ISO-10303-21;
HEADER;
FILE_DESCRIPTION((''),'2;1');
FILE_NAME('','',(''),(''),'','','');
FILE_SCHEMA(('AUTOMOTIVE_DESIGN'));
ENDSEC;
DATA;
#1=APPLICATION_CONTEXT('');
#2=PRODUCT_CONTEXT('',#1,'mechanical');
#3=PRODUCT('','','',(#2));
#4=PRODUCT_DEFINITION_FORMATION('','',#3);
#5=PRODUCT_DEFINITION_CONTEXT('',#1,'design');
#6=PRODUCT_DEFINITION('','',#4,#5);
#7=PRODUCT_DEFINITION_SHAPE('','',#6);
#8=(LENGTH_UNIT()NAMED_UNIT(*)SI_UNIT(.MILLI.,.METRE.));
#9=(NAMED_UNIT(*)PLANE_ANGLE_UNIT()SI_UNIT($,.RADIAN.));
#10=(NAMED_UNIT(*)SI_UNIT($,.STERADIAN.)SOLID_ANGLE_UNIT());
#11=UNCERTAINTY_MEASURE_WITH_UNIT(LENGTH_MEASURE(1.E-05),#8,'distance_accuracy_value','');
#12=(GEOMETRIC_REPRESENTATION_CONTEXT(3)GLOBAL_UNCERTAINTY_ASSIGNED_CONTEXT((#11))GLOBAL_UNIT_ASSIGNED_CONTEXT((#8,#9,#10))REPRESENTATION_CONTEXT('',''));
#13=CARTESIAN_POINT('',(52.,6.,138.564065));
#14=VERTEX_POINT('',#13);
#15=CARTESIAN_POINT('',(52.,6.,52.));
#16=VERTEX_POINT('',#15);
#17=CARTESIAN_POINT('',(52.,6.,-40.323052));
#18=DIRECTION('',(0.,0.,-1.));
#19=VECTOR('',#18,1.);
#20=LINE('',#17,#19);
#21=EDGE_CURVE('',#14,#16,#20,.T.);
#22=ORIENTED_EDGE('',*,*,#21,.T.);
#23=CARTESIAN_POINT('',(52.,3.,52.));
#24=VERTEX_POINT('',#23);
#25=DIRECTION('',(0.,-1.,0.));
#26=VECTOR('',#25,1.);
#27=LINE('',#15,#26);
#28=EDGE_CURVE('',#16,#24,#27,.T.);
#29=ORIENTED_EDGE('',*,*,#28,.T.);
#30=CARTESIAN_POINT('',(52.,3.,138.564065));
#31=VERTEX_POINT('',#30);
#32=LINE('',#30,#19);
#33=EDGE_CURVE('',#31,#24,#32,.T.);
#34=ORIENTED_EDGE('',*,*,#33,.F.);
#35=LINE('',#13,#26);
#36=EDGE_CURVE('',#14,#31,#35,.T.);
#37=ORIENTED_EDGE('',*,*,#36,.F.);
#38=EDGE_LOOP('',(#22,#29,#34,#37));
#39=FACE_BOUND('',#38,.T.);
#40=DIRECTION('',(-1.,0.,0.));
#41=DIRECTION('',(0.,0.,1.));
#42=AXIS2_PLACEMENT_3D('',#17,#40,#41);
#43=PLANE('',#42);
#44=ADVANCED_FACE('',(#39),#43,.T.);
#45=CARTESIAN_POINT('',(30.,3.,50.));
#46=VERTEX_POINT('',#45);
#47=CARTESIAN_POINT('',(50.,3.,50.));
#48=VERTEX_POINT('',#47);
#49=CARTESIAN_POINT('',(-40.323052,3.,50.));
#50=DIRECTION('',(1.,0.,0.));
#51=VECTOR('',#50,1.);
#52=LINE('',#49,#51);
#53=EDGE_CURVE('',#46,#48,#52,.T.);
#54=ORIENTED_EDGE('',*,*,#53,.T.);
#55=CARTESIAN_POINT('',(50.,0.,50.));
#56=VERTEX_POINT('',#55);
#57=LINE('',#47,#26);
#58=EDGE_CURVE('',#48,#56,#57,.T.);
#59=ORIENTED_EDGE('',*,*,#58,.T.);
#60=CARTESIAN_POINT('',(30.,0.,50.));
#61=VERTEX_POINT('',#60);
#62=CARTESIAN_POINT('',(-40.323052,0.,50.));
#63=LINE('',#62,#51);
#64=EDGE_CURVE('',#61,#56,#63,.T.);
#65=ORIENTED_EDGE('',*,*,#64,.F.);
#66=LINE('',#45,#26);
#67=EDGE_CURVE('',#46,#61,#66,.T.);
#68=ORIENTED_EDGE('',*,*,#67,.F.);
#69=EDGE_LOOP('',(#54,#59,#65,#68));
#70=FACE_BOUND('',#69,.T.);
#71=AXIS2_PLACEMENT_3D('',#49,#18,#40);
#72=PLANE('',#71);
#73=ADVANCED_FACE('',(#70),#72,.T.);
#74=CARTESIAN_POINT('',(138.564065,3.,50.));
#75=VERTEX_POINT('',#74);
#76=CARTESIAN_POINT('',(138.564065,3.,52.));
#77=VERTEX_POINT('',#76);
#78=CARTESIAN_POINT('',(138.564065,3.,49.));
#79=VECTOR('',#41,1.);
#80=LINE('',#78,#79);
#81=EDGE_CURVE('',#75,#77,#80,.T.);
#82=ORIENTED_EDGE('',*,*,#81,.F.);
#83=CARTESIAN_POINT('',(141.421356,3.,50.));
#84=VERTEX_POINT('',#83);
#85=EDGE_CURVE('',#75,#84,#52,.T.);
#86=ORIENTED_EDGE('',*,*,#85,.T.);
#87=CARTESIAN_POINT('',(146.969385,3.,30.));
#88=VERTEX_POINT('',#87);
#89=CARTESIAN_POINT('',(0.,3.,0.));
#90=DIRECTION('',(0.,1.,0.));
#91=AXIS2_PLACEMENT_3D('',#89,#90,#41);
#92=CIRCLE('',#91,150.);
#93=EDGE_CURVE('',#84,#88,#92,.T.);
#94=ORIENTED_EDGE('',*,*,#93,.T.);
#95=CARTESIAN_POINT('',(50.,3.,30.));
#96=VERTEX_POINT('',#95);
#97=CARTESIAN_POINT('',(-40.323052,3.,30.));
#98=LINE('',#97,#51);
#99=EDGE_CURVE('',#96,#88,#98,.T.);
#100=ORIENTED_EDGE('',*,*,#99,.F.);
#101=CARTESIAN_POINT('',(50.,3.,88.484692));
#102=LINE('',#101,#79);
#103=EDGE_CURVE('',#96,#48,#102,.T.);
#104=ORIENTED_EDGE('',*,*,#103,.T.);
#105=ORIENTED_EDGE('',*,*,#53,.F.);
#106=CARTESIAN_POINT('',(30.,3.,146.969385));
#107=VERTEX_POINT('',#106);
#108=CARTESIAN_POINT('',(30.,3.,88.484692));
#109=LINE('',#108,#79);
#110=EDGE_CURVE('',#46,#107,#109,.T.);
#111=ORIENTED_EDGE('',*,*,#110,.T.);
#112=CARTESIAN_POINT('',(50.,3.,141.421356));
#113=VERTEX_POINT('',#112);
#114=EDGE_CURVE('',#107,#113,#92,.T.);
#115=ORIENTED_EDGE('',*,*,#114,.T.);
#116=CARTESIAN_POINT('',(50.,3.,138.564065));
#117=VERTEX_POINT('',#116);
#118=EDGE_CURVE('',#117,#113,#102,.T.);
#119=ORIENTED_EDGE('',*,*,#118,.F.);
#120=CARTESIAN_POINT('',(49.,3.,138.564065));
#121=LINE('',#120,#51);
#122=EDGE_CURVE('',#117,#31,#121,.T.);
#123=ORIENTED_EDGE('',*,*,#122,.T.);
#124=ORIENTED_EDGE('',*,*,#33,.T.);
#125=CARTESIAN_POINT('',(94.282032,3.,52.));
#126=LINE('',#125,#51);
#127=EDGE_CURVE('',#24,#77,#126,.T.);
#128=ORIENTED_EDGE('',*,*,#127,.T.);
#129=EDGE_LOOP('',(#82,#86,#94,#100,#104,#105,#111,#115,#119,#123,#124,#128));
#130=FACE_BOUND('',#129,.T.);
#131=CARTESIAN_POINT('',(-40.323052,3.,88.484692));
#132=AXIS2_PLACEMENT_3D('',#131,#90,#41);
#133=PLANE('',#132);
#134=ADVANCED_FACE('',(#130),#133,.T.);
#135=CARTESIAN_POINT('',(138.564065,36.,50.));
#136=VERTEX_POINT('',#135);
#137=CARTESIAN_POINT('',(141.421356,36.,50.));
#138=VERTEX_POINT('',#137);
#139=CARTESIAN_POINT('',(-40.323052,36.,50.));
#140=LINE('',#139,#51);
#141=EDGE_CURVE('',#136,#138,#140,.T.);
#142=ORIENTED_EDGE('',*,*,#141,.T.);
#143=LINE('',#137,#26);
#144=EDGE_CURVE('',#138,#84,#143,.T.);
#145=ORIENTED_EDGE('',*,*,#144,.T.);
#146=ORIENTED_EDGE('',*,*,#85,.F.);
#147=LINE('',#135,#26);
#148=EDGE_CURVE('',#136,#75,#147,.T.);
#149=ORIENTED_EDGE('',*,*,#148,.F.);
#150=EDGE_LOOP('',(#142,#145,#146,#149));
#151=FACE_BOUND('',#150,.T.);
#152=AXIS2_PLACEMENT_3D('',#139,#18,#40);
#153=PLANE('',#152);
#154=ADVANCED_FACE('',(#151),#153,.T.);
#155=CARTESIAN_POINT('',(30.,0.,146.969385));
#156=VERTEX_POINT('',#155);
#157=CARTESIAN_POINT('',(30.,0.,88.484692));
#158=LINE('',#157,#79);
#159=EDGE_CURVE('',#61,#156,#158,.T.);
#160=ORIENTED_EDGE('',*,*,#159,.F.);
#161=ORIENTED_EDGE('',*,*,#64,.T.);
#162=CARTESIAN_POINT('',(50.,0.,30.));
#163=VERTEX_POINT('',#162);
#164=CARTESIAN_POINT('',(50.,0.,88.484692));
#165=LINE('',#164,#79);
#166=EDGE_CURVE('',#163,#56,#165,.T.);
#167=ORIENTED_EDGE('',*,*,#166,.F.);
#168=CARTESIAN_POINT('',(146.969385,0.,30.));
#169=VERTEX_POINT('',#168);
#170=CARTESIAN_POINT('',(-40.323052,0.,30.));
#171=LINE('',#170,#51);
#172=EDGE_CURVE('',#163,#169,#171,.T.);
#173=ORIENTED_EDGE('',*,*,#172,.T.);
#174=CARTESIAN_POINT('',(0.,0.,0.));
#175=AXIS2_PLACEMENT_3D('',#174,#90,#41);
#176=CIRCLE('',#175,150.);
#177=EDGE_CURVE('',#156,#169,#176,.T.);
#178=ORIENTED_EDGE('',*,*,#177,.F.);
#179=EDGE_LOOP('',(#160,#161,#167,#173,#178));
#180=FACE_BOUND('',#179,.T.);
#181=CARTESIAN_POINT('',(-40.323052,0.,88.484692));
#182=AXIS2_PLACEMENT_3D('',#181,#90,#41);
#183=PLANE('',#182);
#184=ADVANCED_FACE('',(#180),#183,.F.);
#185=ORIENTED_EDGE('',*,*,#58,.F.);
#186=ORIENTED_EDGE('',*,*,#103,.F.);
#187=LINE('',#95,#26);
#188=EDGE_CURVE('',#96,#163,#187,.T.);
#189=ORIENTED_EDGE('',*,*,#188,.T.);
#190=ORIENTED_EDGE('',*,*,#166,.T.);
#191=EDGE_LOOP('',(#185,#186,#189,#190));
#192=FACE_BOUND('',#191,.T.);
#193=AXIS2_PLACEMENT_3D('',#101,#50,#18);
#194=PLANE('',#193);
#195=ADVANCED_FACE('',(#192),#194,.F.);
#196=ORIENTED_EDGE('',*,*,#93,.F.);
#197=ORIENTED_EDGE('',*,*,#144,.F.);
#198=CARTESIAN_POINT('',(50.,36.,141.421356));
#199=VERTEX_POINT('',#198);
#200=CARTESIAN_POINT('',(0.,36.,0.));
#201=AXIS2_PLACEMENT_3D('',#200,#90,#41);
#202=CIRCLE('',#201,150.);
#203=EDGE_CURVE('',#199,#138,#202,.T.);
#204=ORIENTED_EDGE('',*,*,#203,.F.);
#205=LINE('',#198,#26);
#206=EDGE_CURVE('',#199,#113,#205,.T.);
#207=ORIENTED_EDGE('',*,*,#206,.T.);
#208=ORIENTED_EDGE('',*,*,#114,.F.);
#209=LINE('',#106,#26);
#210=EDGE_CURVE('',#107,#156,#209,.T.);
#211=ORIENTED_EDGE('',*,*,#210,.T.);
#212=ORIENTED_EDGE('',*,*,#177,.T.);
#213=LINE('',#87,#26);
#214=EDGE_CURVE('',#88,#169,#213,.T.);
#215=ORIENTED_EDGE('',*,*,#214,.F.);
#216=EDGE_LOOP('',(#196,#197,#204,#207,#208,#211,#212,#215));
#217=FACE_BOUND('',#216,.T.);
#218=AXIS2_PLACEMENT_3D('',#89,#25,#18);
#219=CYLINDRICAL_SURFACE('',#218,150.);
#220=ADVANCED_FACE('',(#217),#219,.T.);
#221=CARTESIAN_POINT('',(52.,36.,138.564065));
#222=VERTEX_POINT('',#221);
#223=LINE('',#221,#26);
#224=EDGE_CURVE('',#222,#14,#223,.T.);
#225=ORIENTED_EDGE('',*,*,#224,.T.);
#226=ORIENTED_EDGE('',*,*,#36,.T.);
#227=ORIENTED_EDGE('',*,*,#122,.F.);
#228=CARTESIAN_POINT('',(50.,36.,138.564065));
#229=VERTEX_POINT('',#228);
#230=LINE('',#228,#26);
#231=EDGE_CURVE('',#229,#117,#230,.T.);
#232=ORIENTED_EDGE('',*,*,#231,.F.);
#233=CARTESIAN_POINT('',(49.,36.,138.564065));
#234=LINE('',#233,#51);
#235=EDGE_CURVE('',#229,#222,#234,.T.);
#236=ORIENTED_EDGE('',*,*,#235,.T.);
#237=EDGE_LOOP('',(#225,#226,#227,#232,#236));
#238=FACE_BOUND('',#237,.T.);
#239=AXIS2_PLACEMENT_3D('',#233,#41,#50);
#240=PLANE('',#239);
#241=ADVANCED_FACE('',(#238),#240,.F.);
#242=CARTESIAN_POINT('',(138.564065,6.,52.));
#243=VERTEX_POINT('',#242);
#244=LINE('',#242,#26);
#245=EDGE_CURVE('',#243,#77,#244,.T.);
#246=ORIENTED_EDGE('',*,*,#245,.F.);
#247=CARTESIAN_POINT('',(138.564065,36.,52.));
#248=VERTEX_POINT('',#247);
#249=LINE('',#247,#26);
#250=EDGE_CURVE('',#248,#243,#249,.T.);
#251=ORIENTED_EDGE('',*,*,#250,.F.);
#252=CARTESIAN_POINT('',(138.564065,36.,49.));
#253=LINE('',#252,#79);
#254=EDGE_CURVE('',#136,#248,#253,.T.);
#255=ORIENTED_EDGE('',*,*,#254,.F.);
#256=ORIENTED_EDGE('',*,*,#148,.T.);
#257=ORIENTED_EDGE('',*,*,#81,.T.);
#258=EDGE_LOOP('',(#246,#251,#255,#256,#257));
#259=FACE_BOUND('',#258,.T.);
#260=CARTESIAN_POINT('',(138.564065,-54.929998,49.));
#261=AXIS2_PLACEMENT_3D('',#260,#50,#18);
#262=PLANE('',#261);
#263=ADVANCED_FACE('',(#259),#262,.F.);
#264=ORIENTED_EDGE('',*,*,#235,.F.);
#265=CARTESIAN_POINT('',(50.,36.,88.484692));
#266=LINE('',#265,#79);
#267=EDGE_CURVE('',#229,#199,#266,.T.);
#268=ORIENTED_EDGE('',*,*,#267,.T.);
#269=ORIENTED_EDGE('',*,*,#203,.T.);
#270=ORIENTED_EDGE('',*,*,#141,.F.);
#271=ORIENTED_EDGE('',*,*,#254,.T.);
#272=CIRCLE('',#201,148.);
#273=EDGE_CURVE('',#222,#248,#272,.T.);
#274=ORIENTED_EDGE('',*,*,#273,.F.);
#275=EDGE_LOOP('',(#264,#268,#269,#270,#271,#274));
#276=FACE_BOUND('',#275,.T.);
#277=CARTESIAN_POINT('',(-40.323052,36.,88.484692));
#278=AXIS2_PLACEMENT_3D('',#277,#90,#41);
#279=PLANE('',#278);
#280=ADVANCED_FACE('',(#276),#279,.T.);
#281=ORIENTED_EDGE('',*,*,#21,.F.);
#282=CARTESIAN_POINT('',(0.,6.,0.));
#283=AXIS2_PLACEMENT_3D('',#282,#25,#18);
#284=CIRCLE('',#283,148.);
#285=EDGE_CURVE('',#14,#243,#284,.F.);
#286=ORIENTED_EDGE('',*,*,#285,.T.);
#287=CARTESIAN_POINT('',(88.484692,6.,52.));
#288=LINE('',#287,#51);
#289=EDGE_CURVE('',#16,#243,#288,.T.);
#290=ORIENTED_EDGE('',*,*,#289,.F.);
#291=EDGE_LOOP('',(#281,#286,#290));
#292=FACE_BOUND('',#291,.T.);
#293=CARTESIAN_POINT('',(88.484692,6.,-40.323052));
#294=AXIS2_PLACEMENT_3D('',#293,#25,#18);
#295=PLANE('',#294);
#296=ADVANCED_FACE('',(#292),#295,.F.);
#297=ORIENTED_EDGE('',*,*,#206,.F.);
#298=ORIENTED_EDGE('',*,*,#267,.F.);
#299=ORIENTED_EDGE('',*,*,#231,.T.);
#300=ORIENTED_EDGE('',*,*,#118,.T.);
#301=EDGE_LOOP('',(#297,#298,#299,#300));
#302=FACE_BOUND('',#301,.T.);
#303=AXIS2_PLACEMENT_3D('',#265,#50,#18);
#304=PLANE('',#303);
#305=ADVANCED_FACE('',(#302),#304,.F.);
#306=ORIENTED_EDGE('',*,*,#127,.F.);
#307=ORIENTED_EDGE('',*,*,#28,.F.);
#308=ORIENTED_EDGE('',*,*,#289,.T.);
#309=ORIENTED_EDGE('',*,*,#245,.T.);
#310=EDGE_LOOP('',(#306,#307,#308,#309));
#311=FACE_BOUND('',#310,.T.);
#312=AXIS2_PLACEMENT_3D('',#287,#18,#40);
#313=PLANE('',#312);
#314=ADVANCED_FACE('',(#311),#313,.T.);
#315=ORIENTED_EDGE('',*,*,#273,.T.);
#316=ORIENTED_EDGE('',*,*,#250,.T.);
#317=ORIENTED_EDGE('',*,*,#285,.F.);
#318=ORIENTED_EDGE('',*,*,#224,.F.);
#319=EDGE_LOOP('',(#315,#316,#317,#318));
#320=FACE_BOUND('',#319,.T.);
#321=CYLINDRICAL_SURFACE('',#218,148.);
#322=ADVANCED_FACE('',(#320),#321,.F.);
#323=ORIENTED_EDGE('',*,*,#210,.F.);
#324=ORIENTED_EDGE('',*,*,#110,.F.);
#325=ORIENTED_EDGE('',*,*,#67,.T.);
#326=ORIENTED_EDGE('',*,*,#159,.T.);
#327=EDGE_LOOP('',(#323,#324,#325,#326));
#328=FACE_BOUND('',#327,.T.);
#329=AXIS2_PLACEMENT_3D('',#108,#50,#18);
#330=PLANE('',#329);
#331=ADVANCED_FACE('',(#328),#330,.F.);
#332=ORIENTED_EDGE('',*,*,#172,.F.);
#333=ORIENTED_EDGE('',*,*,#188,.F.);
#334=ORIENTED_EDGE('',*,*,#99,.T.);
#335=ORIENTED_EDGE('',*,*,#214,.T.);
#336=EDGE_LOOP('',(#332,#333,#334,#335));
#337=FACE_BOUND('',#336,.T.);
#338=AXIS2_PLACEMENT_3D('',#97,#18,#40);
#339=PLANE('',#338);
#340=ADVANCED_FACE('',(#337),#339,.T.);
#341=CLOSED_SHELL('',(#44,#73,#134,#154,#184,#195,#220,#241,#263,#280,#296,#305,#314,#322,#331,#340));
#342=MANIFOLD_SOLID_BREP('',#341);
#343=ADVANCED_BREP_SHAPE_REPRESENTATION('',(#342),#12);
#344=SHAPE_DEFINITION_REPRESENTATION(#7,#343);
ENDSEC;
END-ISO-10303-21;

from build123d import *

# Parameters (mm, degrees)
BOSS_EXTRUDE1_DEPTH = 3
BOSS_EXTRUDE2_DEPTH = 33
SHELL2_START        = 2
SHELL2_DEPTH        = 34
SKETCH9_W           = 86.564064606
SKETCH9_H           = 33
SKETCH9_W_2         = 2
CUT_EXTRUDE3_DEPTH  = 3
SKETCH10_W          = 88.564064606
SKETCH10_H          = 33
CUT_EXTRUDE4_DEPTH  = 3
BOSS_EXTRUDE9_DEPTH = 6


# Read off the part's stored shape, not the designer's step: Shell2
with BuildPart() as part:
    # Sketch1 → Boss-Extrude1 (new body)
    with BuildSketch(Plane(origin=(0, 0, 0), x_dir=(1, 0, 0), z_dir=(0, 1, 0))):
        with BuildLine():
            Line((141.421356237, -50), (50, -50))
            Line((50, -50), (50, -141.421356237))
            ThreePointArc((50, -141.421356237), (106.066017178, -106.066017178), (141.421356237, -50))
        make_face()
        with BuildLine():
            Line((50, -50), (30, -50))
            Line((30, -50), (30, -146.969384567))
            ThreePointArc((30, -146.969384567), (40.096074055, -144.541706249), (50, -141.421356237))
            Line((50, -141.421356237), (50, -50))
        make_face()
        with BuildLine():
            Line((50, -30), (50, -50))
            Line((50, -50), (141.421356237, -50))
            ThreePointArc((141.421356237, -50), (144.541706249, -40.096074055), (146.969384567, -30))
            Line((146.969384567, -30), (50, -30))
        make_face()
    extrude(amount=BOSS_EXTRUDE1_DEPTH)

    # Sketch2 → Boss-Extrude2 (add)
    with BuildSketch(Plane(origin=(0, 3, 0), x_dir=(-1, 0, 0), z_dir=(0, 1, 0))):
        with BuildLine():
            Line((-141.421356237, 50), (-50, 50))
            Line((-50, 50), (-50, 141.421356237))
            ThreePointArc((-50, 141.421356237), (-106.066017178, 106.066017178), (-141.421356237, 50))
        make_face()
    extrude(amount=BOSS_EXTRUDE2_DEPTH)

    # Shell2 outline → Shell2 (cut)
    with BuildSketch(Plane(origin=(0, 0, 0), x_dir=(1, 0, 0), z_dir=(0, 1, 0)).offset(SHELL2_START)):
        with BuildLine():
            ThreePointArc((52, -138.564064606), (104.651803616, -104.651803616), (138.564064606, -52))
            Line((138.564064606, -52), (52, -52))
            Line((52, -52), (52, -138.564064606))
        make_face()
    extrude(amount=SHELL2_DEPTH, mode=Mode.SUBTRACT)

    # Sketch9 → Cut-Extrude3 (cut)
    with BuildSketch(Plane.XY.offset(52)):
        with Locations((95.282032303, 19.5)):
            Rectangle(SKETCH9_W, SKETCH9_H)
        with Locations((51, 19.5)):
            Rectangle(SKETCH9_W_2, SKETCH9_H)
    extrude(amount=-CUT_EXTRUDE3_DEPTH, mode=Mode.SUBTRACT)

    # Sketch10 → Cut-Extrude4 (cut)
    with BuildSketch(Plane(origin=(52, 0, 0), x_dir=(0, 0, -1), z_dir=(1, 0, 0))):
        with Locations((-94.282032303, 19.5)):
            Rectangle(SKETCH10_W, SKETCH10_H)
    extrude(amount=-CUT_EXTRUDE4_DEPTH, mode=Mode.SUBTRACT)

    # Sketch11 → Boss-Extrude9 (add)
    with BuildSketch(Plane.XZ):
        with BuildLine():
            ThreePointArc((52, 138.564064606), (104.651803616, 104.651803616), (138.564064606, 52))
            Line((138.564064606, 52), (52, 52))
            Line((52, 52), (52, 138.564064606))
        make_face()
    extrude(amount=-BOSS_EXTRUDE9_DEPTH)


solid = part.part
